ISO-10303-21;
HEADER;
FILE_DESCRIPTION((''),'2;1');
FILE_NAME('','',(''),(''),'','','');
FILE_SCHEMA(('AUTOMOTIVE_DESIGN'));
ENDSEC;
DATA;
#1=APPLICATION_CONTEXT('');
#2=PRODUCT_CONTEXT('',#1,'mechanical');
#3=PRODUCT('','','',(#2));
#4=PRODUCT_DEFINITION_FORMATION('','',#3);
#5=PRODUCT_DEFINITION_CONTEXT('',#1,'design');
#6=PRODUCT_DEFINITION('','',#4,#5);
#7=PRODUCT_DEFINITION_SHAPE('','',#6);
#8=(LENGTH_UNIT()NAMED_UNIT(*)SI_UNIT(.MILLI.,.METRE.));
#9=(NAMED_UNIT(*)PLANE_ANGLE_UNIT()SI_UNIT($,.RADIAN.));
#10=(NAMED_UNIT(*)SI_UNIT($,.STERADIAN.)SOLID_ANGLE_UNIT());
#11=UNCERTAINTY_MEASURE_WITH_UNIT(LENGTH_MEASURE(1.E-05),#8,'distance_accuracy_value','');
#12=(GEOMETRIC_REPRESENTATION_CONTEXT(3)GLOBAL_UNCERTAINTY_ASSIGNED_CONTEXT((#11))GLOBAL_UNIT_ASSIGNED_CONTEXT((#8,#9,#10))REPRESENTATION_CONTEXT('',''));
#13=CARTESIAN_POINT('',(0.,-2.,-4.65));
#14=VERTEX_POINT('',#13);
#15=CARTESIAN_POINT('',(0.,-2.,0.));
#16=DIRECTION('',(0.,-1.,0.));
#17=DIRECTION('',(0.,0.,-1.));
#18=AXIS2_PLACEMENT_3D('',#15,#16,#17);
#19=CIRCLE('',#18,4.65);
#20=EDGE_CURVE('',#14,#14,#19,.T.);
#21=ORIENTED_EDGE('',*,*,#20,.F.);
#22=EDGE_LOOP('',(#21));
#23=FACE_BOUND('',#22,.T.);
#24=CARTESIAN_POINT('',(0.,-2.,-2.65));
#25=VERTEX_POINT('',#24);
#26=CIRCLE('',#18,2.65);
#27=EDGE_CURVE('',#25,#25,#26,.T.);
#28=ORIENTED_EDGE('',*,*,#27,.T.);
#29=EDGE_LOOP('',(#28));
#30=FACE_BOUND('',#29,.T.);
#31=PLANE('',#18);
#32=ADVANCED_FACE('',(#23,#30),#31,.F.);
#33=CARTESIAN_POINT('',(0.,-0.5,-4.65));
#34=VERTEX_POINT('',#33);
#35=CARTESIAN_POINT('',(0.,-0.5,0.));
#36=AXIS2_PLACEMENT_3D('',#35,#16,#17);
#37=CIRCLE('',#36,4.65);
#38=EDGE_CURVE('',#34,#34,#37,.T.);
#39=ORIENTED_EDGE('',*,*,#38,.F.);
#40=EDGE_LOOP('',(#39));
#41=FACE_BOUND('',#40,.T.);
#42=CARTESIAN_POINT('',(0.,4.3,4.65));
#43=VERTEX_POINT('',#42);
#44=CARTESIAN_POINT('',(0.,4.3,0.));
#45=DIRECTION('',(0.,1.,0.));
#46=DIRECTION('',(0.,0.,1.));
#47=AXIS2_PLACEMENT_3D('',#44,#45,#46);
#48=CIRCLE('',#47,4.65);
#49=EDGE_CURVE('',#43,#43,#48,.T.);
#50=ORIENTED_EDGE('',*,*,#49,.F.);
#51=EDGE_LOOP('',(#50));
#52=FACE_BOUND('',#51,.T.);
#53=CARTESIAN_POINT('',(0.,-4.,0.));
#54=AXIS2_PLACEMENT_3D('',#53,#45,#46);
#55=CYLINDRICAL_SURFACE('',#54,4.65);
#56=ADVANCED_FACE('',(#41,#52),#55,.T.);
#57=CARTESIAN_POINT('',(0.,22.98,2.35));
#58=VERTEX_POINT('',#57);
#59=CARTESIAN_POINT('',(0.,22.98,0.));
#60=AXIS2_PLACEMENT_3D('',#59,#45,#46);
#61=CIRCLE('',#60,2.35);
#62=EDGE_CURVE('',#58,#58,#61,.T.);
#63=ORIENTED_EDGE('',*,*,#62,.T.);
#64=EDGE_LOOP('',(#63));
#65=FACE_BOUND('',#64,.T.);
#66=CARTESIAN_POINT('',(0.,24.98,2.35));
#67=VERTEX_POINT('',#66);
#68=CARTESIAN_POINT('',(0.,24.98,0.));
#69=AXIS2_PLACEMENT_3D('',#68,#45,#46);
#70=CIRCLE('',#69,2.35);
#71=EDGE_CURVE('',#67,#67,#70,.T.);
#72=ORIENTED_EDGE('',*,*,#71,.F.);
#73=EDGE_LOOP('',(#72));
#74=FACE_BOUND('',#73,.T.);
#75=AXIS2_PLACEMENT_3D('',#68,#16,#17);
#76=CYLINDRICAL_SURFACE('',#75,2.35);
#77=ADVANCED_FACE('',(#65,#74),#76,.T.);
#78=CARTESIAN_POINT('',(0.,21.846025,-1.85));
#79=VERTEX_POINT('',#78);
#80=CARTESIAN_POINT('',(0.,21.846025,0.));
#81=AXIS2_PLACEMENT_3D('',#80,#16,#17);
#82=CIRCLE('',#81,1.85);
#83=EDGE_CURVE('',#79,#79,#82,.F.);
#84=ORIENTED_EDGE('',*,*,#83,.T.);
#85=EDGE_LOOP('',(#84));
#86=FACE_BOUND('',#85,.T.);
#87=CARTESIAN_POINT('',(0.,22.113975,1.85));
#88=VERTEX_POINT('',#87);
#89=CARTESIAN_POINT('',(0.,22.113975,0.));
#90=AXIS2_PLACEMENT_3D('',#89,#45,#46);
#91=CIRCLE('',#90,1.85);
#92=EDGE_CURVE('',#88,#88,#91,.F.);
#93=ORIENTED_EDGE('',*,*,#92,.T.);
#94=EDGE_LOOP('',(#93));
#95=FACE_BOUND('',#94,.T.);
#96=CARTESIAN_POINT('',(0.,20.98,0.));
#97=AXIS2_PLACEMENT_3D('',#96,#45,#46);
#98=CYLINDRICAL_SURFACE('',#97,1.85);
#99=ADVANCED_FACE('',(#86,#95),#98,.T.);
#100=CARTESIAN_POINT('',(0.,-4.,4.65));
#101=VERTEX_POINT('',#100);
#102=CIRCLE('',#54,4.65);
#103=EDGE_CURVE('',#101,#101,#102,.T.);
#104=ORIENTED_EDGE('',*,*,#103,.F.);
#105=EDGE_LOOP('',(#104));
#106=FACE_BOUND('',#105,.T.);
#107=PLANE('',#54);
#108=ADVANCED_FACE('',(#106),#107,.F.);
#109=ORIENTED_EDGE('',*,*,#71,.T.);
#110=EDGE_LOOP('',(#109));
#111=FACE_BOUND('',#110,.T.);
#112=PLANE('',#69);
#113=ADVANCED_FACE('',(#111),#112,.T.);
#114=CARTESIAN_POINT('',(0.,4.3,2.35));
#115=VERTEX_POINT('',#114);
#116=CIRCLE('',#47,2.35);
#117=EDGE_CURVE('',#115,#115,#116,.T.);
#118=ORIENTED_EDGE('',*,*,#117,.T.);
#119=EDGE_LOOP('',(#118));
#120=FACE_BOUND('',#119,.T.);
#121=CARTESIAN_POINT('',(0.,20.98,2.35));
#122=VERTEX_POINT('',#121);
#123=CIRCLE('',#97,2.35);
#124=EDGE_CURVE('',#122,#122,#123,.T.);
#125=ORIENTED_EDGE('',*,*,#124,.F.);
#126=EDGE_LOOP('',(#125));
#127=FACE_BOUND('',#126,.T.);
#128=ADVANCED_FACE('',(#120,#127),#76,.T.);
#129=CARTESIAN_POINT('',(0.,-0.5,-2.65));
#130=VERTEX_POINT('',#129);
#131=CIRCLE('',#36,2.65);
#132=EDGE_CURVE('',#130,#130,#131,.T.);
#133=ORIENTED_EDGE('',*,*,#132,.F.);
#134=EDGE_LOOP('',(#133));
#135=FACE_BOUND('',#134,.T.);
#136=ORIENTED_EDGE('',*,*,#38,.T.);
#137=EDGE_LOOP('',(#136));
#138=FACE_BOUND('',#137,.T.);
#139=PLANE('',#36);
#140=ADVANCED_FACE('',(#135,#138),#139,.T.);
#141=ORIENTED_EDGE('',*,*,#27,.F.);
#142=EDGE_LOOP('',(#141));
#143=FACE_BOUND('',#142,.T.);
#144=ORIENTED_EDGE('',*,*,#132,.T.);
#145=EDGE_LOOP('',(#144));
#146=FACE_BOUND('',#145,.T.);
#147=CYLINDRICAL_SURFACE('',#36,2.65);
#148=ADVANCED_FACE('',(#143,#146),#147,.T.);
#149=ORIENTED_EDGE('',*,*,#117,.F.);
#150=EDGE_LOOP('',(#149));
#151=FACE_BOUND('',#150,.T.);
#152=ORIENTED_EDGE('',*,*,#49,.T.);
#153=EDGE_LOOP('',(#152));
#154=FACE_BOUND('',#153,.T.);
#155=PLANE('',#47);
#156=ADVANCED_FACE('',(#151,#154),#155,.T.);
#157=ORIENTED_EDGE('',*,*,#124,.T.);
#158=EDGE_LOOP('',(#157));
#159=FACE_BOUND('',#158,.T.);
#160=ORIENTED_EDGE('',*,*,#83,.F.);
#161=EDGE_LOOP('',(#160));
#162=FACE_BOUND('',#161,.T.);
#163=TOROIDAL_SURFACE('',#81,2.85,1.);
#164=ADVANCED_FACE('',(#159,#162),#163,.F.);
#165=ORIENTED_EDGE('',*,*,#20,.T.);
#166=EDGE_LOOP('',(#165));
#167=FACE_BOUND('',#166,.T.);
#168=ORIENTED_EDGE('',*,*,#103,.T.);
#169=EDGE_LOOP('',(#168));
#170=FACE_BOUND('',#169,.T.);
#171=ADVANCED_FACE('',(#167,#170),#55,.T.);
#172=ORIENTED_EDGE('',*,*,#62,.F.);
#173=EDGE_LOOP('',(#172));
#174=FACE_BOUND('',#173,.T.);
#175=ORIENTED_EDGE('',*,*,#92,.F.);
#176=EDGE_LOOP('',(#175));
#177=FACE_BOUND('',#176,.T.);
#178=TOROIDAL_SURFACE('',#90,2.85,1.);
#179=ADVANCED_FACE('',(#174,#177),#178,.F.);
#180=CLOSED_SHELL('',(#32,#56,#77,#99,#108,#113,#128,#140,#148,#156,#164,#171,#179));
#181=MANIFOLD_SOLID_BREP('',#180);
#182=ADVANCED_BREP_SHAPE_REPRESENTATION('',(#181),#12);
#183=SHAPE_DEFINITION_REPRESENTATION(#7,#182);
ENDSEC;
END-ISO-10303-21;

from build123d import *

# Parameters (mm, degrees)
BOSS_EXTRUDE1_DEPTH      = 4.3
BOSS_EXTRUDE1_DEPTH_BACK = 4
SKETCH1_R                = 4.65
SKETCH2_R                = 2.35
BOSS_EXTRUDE2_DEPTH      = 20.68
CUT_EXTRUDE1_START       = -4
SKETCH3_R                = 2.35
SKETCH3_R_2              = 1.85
CUT_EXTRUDE1_DEPTH       = 2
CUT_EXTRUDE2_START       = -2
SKETCH4_R                = 4.65
SKETCH4_R_2              = 2.65
CUT_EXTRUDE2_DEPTH       = 1.5
FILLET1_R                = 1


with BuildPart() as part:
    # Sketch1 → Boss-Extrude1 (new, two sides: drawn at the far end of the back side and taken through both)
    with BuildSketch(Plane(origin=(0, 0, 0), x_dir=(1, 0, 0), z_dir=(0, 1, 0)).offset(-BOSS_EXTRUDE1_DEPTH_BACK)):
        with Locations(Location((0, 0, 0), (0, 0, 270))):
            Circle(SKETCH1_R)
    extrude(amount=BOSS_EXTRUDE1_DEPTH + BOSS_EXTRUDE1_DEPTH_BACK)

    # Sketch2 → Boss-Extrude2 (add)
    with BuildSketch(Plane(origin=(0, 4.3, 0), x_dir=(1, 0, 0), z_dir=(0, 1, 0))):
        with Locations(Location((0, 0, 0), (0, 0, 270))):
            Circle(SKETCH2_R)
    extrude(amount=BOSS_EXTRUDE2_DEPTH)

    # Sketch3 → Cut-Extrude1 (cut)
    with BuildSketch(Plane(origin=(0, 24.98, 0), x_dir=(1, 0, 0), z_dir=(0, 1, 0)).offset(CUT_EXTRUDE1_START)):
        with Locations(Location((0, 0, 0), (0, 0, 270))):
            Circle(SKETCH3_R)
        with Locations(Location((0, 0, 0), (0, 0, 270))):
            Circle(SKETCH3_R_2, mode=Mode.SUBTRACT)
    extrude(amount=CUT_EXTRUDE1_DEPTH, mode=Mode.SUBTRACT)

    # Sketch4 → Cut-Extrude2 (cut)
    with BuildSketch(Plane.XZ.offset(4).offset(CUT_EXTRUDE2_START)):
        with Locations(Location((0, 0, 0), (0, 0, 90))):
            Circle(SKETCH4_R)
        with Locations(Location((0, 0, 0), (0, 0, 270))):
            Circle(SKETCH4_R_2, mode=Mode.SUBTRACT)
    extrude(amount=-CUT_EXTRUDE2_DEPTH, mode=Mode.SUBTRACT)

    # Fillet1
    # the kernel refuses this fillet: 1 mm, written as the material it adds along each edge
    with BuildSketch(Plane(origin=(0, 20.98, 0), x_dir=(0, 0, 1), z_dir=(-1, 0, 0))) as fillet1_piece_1:
        with BuildLine():
            CenterArc((2.85, 0.866025404), FILLET1_R, 180, 60)
            Line((1.85, 0.866025404), (1.83, 0.866025404))
            Line((1.83, 0.866025404), (1.83, 0))
            Line((1.83, 0), (1.85, -0.02))
            ThreePointArc((1.85, -0.02), (2.1, -0.02), (2.34, -0.017320508))
            Line((2.34, -0.017320508), (2.35, 0))
        make_face()
    revolve(axis=Axis((0, 20.98, 0), (0, 1, 0)))
    with BuildSketch(Plane(origin=(0, 22.98, 0), x_dir=(0, 0, 1), z_dir=(-1, 0, 0))) as fillet1_piece_2:
        with BuildLine():
            CenterArc((2.85, -0.866025404), FILLET1_R, 120, 60)
            Line((2.35, 0), (2.34, 0.017320508))
            ThreePointArc((2.34, 0.017320508), (2.1, 0.02), (1.85, 0.02))
            Line((1.85, 0.02), (1.83, 0))
            Line((1.83, 0), (1.83, -0.866025404))
            Line((1.83, -0.866025404), (1.85, -0.866025404))
        make_face()
    revolve(axis=Axis((0, 22.98, 0), (0, 1, 0)))


solid = part.part
